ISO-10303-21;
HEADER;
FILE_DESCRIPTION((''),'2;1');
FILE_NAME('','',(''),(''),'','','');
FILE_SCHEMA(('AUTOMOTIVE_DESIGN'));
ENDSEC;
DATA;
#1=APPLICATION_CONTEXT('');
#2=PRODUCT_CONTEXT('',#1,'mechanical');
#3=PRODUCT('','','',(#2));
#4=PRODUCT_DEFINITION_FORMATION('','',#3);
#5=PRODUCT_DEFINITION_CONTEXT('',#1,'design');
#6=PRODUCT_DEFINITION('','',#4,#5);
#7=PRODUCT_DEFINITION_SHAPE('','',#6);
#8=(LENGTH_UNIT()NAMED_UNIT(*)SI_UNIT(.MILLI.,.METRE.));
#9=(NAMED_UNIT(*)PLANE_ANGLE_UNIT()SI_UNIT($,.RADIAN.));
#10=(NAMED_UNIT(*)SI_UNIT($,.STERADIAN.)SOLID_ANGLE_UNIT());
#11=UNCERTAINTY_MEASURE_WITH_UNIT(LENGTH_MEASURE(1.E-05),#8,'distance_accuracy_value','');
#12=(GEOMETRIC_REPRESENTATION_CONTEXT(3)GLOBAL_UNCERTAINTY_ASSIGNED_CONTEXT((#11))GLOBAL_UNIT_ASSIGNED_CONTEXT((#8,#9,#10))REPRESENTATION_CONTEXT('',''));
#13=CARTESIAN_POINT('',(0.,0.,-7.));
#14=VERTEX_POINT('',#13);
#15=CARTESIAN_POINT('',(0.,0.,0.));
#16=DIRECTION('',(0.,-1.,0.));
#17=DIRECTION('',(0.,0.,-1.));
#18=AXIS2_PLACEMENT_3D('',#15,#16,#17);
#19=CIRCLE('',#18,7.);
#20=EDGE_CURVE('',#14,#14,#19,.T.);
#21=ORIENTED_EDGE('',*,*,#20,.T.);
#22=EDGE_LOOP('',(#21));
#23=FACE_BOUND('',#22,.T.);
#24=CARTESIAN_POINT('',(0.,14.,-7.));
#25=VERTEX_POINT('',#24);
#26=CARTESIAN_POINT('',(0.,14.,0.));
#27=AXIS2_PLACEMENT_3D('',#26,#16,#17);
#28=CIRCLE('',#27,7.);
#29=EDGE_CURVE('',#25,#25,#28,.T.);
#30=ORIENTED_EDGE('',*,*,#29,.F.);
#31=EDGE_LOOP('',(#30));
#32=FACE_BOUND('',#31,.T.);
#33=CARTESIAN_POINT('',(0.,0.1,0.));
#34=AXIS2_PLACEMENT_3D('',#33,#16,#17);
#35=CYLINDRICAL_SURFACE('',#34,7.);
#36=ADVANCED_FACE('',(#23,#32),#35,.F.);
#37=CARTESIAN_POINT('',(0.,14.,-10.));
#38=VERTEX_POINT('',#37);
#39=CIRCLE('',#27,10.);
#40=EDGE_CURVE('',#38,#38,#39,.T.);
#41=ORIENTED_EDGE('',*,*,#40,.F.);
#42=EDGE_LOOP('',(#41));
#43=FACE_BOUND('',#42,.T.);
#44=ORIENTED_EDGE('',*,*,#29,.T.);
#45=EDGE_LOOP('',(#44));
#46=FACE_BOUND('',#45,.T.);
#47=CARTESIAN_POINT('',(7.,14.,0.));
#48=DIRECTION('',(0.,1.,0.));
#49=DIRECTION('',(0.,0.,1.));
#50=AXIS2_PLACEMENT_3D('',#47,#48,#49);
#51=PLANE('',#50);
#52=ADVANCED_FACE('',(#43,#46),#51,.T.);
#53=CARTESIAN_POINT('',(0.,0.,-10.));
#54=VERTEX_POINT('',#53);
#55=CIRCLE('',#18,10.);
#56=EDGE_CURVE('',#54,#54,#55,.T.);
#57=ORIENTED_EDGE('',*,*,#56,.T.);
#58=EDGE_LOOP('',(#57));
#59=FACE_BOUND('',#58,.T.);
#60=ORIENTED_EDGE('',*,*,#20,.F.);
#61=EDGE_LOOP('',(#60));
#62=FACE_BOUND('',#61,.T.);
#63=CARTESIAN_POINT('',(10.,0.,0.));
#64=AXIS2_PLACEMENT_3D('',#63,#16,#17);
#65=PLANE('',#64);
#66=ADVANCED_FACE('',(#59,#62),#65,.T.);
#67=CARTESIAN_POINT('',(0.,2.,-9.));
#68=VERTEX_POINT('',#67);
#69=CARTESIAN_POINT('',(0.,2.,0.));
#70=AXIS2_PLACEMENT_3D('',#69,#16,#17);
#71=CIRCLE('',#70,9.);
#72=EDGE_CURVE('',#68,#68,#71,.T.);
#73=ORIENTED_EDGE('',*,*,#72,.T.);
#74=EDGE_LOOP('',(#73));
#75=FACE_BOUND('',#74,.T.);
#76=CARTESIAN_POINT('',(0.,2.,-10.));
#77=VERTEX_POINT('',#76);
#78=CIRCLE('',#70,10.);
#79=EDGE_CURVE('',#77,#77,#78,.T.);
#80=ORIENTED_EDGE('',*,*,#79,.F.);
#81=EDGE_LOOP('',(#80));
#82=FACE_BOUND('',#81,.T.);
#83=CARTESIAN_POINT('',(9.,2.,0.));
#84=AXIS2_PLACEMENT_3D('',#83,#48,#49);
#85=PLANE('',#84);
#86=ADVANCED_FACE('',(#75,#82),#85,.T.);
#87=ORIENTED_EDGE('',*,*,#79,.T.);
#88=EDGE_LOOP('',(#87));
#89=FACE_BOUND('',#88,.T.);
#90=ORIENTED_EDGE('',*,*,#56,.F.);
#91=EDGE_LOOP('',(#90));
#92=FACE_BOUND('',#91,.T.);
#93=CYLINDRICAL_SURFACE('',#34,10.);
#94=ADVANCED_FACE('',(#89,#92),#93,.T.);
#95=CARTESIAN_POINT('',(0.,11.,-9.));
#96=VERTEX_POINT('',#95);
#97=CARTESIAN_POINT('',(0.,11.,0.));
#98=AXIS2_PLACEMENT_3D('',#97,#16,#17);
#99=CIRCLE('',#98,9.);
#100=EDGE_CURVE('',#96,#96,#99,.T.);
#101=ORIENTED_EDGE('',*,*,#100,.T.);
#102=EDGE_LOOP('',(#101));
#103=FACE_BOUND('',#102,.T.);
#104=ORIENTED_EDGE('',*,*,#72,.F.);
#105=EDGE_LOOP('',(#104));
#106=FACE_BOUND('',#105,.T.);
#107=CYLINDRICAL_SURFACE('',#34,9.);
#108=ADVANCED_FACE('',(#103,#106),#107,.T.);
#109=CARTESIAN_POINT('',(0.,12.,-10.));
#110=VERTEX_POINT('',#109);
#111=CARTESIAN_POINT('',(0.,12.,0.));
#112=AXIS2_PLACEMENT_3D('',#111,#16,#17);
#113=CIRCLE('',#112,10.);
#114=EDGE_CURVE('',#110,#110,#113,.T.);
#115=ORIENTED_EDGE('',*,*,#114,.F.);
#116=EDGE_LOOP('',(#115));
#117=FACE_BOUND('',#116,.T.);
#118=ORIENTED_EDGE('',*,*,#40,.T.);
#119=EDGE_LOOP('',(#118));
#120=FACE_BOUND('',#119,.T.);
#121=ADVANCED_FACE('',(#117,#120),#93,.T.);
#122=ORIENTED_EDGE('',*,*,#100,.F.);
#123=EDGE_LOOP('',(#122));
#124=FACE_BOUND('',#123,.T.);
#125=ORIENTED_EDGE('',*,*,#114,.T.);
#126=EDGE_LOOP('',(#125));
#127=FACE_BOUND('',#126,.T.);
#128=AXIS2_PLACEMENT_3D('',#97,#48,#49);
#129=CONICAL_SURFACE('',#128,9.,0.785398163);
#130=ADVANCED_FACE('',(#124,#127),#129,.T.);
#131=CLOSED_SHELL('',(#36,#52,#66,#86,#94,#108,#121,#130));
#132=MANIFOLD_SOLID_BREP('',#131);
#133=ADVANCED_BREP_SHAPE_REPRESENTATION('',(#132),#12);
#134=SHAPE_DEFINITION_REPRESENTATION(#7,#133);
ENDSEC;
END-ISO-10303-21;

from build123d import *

# Parameters (mm, degrees)
CHAMFER1_SIZE = 1


with BuildPart() as part:
    # Sketch1 → Revolve1 (revolve)
    with BuildSketch(Plane.XY, mode=Mode.PRIVATE) as revolve1_sk:
        Polygon((7, 0), (7, 14), (10, 14), (10, 12), (9, 12), (9, 2), (10, 2), (10, 0), align=None)
    revolve(revolve1_sk.sketch.rotate(Axis((0, 0.1, 0), (0, 1, 0)), 90), axis=Axis((0, 0.1, 0), (0, 1, 0)))

    # Chamfer1
    chamfer1_edges = [part.edges().sort_by_distance(p)[0] for p in [
        (0, 12, 9),
    ]]
    chamfer(chamfer1_edges, length=CHAMFER1_SIZE - 0.0001)  # a hair under: the kernel refuses the full size


solid = part.part
